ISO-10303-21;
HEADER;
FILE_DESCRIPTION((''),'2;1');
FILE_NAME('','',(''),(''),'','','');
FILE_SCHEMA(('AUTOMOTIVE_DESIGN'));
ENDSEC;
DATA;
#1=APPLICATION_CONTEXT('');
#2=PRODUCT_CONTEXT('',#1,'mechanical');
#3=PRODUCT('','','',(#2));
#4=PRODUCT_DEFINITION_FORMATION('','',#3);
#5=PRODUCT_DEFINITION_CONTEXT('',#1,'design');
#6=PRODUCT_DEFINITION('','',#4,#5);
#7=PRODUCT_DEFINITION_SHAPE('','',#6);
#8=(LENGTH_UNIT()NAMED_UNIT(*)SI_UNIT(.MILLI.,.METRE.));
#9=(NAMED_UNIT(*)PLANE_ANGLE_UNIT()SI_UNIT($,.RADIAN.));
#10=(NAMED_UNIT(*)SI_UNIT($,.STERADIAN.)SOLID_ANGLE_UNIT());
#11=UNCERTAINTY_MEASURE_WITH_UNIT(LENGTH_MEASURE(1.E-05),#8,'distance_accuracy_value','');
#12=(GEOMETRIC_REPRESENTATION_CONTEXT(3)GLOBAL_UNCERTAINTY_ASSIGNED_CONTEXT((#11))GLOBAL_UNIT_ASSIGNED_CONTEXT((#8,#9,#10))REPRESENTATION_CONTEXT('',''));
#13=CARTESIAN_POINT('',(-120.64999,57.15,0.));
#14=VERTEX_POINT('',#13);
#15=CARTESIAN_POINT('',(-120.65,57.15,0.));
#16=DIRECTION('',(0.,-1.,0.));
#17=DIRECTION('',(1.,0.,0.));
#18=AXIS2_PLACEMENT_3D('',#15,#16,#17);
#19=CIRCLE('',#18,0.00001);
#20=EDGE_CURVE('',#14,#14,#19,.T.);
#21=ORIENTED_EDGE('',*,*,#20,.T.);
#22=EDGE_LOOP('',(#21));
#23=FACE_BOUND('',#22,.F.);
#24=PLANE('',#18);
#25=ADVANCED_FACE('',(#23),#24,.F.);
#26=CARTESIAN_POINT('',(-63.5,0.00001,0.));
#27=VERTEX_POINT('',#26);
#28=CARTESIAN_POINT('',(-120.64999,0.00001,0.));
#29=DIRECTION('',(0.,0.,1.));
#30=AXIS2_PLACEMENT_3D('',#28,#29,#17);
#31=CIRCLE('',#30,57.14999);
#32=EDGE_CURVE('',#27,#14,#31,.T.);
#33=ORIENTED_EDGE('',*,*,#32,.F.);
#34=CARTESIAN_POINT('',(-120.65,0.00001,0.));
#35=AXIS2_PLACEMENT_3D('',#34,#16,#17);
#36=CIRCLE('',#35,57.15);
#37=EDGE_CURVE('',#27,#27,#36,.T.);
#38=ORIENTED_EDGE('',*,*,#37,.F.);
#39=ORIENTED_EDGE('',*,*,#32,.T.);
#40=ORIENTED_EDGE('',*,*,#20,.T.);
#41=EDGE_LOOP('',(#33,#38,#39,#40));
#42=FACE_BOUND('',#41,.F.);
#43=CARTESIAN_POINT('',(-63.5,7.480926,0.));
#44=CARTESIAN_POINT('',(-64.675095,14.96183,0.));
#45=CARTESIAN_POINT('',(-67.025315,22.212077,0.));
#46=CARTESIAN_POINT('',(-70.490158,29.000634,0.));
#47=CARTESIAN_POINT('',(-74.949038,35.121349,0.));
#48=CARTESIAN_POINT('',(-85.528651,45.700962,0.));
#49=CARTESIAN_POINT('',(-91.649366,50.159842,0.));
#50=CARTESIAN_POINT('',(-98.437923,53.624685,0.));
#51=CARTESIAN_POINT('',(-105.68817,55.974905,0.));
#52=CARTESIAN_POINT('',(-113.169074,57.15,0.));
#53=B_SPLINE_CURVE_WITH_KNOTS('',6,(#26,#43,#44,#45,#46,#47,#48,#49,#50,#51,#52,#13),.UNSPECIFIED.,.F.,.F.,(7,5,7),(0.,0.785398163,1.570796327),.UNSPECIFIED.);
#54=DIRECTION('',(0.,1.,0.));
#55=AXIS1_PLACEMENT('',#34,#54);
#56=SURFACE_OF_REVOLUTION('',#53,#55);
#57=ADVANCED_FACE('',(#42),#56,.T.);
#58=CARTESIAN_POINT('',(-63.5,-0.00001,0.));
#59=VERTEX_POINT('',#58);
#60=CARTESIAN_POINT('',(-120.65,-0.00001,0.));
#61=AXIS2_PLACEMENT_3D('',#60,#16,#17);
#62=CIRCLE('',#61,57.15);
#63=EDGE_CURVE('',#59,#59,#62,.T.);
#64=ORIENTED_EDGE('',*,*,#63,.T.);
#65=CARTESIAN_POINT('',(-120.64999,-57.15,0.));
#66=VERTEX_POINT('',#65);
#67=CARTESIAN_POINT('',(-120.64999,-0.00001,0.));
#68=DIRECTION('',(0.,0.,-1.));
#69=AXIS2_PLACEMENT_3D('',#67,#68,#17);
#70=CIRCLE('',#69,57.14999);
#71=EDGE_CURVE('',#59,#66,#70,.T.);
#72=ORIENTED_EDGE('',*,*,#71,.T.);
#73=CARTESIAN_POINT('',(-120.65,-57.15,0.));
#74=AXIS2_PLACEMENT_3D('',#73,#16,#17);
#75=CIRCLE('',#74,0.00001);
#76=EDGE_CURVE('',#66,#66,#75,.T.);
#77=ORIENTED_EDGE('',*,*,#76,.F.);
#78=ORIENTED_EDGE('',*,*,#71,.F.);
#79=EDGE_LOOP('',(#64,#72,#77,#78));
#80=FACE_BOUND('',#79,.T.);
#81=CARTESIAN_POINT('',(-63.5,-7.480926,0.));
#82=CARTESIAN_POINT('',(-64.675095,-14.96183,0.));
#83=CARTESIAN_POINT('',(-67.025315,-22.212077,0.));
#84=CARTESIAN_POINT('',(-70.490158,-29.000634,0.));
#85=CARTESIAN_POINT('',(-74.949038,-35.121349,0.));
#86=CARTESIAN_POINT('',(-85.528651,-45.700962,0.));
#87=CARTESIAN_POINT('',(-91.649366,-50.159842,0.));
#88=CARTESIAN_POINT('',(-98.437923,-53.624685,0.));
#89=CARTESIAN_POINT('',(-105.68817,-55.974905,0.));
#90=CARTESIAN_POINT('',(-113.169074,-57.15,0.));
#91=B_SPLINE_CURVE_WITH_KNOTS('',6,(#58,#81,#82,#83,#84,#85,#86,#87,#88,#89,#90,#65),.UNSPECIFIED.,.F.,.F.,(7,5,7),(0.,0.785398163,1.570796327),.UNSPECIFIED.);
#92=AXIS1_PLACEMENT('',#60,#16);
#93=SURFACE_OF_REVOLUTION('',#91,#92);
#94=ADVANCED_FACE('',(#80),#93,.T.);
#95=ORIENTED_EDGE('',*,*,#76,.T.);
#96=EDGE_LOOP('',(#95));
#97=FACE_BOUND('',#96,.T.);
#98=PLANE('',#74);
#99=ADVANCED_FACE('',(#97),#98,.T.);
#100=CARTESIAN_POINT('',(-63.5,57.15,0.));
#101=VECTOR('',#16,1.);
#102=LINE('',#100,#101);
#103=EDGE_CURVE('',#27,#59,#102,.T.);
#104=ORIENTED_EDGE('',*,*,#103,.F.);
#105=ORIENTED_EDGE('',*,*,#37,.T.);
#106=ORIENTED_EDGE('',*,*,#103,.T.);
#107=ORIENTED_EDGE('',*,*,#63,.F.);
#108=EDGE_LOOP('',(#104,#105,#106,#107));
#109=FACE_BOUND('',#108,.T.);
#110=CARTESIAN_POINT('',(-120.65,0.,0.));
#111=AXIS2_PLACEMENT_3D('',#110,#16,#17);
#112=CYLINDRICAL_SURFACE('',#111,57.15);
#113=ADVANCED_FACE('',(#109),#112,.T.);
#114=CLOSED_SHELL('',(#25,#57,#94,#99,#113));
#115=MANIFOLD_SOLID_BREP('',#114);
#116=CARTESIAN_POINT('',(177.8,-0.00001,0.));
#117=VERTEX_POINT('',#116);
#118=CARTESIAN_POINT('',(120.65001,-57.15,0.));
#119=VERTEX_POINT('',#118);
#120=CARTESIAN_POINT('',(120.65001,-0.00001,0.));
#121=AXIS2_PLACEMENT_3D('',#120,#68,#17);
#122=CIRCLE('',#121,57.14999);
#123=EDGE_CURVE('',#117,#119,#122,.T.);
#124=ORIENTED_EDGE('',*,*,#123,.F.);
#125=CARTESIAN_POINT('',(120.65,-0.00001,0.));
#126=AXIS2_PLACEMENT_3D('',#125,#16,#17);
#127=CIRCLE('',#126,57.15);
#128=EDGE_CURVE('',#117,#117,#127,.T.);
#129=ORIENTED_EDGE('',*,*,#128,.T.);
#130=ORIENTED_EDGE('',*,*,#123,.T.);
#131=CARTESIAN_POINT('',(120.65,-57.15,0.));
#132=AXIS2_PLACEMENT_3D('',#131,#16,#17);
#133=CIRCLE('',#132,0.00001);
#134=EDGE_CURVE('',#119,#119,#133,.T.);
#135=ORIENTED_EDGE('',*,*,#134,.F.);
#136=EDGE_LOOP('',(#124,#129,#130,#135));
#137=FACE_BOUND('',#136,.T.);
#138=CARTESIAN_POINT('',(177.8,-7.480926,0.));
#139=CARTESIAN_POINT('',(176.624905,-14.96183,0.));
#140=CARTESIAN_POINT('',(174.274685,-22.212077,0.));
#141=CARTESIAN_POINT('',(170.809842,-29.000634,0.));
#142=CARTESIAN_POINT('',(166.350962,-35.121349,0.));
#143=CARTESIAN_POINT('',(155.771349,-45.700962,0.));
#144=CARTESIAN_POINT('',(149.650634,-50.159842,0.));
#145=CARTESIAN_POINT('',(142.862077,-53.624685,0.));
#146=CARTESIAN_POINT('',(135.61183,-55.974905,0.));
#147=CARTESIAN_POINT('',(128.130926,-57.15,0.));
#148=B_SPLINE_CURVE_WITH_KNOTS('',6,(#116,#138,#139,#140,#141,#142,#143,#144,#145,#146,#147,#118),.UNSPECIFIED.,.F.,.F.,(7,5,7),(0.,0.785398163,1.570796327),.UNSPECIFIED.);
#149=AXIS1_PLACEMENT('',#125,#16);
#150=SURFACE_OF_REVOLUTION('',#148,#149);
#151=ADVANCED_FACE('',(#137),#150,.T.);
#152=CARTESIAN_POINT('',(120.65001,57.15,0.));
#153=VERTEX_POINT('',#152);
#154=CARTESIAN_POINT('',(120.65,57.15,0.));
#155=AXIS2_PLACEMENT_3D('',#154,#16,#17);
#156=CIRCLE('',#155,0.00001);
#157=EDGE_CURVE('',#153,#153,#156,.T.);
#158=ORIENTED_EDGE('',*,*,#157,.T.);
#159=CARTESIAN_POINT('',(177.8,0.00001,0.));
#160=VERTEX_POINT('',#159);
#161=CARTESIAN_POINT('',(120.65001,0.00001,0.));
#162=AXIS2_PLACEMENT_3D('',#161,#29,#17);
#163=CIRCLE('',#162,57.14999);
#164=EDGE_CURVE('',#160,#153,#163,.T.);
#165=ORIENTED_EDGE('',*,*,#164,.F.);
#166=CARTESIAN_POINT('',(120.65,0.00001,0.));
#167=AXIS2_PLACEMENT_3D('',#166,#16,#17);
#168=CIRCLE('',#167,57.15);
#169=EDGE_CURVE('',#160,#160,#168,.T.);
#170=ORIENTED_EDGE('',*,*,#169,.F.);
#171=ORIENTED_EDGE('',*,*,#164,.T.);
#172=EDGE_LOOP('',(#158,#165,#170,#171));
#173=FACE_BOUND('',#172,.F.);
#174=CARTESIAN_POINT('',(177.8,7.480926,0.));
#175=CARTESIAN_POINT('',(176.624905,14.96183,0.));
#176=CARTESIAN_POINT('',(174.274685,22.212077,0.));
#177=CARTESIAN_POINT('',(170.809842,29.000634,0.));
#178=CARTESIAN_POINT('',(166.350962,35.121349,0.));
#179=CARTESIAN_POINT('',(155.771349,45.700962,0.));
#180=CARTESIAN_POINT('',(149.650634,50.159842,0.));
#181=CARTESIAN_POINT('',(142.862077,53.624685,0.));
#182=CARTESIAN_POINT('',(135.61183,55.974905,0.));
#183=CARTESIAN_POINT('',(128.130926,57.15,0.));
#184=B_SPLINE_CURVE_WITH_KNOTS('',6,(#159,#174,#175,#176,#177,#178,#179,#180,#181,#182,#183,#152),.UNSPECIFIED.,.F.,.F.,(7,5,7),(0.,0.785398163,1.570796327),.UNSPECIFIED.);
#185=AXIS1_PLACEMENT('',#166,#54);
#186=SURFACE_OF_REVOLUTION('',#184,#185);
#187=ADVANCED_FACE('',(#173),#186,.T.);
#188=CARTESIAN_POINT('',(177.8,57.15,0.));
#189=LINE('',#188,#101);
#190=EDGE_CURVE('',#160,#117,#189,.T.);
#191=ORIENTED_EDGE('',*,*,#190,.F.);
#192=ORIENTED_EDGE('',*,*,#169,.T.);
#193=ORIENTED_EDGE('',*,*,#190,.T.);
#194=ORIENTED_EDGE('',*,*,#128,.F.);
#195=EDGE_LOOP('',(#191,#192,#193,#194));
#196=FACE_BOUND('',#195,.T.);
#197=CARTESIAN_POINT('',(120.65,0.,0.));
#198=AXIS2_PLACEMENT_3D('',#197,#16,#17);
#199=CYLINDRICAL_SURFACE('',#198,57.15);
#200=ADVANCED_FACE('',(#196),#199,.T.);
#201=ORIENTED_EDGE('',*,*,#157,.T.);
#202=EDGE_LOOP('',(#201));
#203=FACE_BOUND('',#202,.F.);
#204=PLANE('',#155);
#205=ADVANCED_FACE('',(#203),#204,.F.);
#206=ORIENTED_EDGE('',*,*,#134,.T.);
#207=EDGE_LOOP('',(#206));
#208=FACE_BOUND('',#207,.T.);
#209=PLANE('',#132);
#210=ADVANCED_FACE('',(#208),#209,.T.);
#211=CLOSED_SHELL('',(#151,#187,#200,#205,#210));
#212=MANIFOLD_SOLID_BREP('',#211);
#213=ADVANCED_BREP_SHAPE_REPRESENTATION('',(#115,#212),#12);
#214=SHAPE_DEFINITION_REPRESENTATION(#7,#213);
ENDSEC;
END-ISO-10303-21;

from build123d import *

# Parameters (mm, degrees)
F0_R     = 57.15
F1_DEPTH = 57.15
F2_R     = 57.14999
F2_2_R   = 57.14999


# Not quite as in the source:
# - a fillet or chamfer is up to 0.001 mm smaller than in the source, because OpenCascade refuses the exact size


with BuildPart() as f1:
    # F0 (on Front) → F1 (new body, symmetric)
    with BuildSketch(Plane.XZ):
        with Locations((120.65, 0)):
            Circle(F0_R)
    extrude(amount=F1_DEPTH, both=True)

    # F2 (radius 57.15 in the source; OpenCascade refuses exactly that, so slightly less here)
    f2_edges = [f1.edges().sort_by_distance(p)[0] for p in [
        (63.5, 57.15, 0),
        (63.5, -57.15, 0),
    ]]
    fillet(f2_edges, radius=F2_R)


with BuildPart() as f1b:
    # F0 (on Front) → F1, piece 2 (new body, symmetric)
    with BuildSketch(Plane.XZ):
        with Locations((-120.65, 0)):
            Circle(F0_R)
    extrude(amount=F1_DEPTH, both=True)

    # F2#2 (radius 57.15 in the source; OpenCascade refuses exactly that, so slightly less here)
    f2_2_edges = [f1b.edges().sort_by_distance(p)[0] for p in [
        (-177.8, -57.15, 0),
        (-177.8, 57.15, 0),
    ]]
    fillet(f2_2_edges, radius=F2_2_R)


solid = Compound([f1.part, f1b.part])
